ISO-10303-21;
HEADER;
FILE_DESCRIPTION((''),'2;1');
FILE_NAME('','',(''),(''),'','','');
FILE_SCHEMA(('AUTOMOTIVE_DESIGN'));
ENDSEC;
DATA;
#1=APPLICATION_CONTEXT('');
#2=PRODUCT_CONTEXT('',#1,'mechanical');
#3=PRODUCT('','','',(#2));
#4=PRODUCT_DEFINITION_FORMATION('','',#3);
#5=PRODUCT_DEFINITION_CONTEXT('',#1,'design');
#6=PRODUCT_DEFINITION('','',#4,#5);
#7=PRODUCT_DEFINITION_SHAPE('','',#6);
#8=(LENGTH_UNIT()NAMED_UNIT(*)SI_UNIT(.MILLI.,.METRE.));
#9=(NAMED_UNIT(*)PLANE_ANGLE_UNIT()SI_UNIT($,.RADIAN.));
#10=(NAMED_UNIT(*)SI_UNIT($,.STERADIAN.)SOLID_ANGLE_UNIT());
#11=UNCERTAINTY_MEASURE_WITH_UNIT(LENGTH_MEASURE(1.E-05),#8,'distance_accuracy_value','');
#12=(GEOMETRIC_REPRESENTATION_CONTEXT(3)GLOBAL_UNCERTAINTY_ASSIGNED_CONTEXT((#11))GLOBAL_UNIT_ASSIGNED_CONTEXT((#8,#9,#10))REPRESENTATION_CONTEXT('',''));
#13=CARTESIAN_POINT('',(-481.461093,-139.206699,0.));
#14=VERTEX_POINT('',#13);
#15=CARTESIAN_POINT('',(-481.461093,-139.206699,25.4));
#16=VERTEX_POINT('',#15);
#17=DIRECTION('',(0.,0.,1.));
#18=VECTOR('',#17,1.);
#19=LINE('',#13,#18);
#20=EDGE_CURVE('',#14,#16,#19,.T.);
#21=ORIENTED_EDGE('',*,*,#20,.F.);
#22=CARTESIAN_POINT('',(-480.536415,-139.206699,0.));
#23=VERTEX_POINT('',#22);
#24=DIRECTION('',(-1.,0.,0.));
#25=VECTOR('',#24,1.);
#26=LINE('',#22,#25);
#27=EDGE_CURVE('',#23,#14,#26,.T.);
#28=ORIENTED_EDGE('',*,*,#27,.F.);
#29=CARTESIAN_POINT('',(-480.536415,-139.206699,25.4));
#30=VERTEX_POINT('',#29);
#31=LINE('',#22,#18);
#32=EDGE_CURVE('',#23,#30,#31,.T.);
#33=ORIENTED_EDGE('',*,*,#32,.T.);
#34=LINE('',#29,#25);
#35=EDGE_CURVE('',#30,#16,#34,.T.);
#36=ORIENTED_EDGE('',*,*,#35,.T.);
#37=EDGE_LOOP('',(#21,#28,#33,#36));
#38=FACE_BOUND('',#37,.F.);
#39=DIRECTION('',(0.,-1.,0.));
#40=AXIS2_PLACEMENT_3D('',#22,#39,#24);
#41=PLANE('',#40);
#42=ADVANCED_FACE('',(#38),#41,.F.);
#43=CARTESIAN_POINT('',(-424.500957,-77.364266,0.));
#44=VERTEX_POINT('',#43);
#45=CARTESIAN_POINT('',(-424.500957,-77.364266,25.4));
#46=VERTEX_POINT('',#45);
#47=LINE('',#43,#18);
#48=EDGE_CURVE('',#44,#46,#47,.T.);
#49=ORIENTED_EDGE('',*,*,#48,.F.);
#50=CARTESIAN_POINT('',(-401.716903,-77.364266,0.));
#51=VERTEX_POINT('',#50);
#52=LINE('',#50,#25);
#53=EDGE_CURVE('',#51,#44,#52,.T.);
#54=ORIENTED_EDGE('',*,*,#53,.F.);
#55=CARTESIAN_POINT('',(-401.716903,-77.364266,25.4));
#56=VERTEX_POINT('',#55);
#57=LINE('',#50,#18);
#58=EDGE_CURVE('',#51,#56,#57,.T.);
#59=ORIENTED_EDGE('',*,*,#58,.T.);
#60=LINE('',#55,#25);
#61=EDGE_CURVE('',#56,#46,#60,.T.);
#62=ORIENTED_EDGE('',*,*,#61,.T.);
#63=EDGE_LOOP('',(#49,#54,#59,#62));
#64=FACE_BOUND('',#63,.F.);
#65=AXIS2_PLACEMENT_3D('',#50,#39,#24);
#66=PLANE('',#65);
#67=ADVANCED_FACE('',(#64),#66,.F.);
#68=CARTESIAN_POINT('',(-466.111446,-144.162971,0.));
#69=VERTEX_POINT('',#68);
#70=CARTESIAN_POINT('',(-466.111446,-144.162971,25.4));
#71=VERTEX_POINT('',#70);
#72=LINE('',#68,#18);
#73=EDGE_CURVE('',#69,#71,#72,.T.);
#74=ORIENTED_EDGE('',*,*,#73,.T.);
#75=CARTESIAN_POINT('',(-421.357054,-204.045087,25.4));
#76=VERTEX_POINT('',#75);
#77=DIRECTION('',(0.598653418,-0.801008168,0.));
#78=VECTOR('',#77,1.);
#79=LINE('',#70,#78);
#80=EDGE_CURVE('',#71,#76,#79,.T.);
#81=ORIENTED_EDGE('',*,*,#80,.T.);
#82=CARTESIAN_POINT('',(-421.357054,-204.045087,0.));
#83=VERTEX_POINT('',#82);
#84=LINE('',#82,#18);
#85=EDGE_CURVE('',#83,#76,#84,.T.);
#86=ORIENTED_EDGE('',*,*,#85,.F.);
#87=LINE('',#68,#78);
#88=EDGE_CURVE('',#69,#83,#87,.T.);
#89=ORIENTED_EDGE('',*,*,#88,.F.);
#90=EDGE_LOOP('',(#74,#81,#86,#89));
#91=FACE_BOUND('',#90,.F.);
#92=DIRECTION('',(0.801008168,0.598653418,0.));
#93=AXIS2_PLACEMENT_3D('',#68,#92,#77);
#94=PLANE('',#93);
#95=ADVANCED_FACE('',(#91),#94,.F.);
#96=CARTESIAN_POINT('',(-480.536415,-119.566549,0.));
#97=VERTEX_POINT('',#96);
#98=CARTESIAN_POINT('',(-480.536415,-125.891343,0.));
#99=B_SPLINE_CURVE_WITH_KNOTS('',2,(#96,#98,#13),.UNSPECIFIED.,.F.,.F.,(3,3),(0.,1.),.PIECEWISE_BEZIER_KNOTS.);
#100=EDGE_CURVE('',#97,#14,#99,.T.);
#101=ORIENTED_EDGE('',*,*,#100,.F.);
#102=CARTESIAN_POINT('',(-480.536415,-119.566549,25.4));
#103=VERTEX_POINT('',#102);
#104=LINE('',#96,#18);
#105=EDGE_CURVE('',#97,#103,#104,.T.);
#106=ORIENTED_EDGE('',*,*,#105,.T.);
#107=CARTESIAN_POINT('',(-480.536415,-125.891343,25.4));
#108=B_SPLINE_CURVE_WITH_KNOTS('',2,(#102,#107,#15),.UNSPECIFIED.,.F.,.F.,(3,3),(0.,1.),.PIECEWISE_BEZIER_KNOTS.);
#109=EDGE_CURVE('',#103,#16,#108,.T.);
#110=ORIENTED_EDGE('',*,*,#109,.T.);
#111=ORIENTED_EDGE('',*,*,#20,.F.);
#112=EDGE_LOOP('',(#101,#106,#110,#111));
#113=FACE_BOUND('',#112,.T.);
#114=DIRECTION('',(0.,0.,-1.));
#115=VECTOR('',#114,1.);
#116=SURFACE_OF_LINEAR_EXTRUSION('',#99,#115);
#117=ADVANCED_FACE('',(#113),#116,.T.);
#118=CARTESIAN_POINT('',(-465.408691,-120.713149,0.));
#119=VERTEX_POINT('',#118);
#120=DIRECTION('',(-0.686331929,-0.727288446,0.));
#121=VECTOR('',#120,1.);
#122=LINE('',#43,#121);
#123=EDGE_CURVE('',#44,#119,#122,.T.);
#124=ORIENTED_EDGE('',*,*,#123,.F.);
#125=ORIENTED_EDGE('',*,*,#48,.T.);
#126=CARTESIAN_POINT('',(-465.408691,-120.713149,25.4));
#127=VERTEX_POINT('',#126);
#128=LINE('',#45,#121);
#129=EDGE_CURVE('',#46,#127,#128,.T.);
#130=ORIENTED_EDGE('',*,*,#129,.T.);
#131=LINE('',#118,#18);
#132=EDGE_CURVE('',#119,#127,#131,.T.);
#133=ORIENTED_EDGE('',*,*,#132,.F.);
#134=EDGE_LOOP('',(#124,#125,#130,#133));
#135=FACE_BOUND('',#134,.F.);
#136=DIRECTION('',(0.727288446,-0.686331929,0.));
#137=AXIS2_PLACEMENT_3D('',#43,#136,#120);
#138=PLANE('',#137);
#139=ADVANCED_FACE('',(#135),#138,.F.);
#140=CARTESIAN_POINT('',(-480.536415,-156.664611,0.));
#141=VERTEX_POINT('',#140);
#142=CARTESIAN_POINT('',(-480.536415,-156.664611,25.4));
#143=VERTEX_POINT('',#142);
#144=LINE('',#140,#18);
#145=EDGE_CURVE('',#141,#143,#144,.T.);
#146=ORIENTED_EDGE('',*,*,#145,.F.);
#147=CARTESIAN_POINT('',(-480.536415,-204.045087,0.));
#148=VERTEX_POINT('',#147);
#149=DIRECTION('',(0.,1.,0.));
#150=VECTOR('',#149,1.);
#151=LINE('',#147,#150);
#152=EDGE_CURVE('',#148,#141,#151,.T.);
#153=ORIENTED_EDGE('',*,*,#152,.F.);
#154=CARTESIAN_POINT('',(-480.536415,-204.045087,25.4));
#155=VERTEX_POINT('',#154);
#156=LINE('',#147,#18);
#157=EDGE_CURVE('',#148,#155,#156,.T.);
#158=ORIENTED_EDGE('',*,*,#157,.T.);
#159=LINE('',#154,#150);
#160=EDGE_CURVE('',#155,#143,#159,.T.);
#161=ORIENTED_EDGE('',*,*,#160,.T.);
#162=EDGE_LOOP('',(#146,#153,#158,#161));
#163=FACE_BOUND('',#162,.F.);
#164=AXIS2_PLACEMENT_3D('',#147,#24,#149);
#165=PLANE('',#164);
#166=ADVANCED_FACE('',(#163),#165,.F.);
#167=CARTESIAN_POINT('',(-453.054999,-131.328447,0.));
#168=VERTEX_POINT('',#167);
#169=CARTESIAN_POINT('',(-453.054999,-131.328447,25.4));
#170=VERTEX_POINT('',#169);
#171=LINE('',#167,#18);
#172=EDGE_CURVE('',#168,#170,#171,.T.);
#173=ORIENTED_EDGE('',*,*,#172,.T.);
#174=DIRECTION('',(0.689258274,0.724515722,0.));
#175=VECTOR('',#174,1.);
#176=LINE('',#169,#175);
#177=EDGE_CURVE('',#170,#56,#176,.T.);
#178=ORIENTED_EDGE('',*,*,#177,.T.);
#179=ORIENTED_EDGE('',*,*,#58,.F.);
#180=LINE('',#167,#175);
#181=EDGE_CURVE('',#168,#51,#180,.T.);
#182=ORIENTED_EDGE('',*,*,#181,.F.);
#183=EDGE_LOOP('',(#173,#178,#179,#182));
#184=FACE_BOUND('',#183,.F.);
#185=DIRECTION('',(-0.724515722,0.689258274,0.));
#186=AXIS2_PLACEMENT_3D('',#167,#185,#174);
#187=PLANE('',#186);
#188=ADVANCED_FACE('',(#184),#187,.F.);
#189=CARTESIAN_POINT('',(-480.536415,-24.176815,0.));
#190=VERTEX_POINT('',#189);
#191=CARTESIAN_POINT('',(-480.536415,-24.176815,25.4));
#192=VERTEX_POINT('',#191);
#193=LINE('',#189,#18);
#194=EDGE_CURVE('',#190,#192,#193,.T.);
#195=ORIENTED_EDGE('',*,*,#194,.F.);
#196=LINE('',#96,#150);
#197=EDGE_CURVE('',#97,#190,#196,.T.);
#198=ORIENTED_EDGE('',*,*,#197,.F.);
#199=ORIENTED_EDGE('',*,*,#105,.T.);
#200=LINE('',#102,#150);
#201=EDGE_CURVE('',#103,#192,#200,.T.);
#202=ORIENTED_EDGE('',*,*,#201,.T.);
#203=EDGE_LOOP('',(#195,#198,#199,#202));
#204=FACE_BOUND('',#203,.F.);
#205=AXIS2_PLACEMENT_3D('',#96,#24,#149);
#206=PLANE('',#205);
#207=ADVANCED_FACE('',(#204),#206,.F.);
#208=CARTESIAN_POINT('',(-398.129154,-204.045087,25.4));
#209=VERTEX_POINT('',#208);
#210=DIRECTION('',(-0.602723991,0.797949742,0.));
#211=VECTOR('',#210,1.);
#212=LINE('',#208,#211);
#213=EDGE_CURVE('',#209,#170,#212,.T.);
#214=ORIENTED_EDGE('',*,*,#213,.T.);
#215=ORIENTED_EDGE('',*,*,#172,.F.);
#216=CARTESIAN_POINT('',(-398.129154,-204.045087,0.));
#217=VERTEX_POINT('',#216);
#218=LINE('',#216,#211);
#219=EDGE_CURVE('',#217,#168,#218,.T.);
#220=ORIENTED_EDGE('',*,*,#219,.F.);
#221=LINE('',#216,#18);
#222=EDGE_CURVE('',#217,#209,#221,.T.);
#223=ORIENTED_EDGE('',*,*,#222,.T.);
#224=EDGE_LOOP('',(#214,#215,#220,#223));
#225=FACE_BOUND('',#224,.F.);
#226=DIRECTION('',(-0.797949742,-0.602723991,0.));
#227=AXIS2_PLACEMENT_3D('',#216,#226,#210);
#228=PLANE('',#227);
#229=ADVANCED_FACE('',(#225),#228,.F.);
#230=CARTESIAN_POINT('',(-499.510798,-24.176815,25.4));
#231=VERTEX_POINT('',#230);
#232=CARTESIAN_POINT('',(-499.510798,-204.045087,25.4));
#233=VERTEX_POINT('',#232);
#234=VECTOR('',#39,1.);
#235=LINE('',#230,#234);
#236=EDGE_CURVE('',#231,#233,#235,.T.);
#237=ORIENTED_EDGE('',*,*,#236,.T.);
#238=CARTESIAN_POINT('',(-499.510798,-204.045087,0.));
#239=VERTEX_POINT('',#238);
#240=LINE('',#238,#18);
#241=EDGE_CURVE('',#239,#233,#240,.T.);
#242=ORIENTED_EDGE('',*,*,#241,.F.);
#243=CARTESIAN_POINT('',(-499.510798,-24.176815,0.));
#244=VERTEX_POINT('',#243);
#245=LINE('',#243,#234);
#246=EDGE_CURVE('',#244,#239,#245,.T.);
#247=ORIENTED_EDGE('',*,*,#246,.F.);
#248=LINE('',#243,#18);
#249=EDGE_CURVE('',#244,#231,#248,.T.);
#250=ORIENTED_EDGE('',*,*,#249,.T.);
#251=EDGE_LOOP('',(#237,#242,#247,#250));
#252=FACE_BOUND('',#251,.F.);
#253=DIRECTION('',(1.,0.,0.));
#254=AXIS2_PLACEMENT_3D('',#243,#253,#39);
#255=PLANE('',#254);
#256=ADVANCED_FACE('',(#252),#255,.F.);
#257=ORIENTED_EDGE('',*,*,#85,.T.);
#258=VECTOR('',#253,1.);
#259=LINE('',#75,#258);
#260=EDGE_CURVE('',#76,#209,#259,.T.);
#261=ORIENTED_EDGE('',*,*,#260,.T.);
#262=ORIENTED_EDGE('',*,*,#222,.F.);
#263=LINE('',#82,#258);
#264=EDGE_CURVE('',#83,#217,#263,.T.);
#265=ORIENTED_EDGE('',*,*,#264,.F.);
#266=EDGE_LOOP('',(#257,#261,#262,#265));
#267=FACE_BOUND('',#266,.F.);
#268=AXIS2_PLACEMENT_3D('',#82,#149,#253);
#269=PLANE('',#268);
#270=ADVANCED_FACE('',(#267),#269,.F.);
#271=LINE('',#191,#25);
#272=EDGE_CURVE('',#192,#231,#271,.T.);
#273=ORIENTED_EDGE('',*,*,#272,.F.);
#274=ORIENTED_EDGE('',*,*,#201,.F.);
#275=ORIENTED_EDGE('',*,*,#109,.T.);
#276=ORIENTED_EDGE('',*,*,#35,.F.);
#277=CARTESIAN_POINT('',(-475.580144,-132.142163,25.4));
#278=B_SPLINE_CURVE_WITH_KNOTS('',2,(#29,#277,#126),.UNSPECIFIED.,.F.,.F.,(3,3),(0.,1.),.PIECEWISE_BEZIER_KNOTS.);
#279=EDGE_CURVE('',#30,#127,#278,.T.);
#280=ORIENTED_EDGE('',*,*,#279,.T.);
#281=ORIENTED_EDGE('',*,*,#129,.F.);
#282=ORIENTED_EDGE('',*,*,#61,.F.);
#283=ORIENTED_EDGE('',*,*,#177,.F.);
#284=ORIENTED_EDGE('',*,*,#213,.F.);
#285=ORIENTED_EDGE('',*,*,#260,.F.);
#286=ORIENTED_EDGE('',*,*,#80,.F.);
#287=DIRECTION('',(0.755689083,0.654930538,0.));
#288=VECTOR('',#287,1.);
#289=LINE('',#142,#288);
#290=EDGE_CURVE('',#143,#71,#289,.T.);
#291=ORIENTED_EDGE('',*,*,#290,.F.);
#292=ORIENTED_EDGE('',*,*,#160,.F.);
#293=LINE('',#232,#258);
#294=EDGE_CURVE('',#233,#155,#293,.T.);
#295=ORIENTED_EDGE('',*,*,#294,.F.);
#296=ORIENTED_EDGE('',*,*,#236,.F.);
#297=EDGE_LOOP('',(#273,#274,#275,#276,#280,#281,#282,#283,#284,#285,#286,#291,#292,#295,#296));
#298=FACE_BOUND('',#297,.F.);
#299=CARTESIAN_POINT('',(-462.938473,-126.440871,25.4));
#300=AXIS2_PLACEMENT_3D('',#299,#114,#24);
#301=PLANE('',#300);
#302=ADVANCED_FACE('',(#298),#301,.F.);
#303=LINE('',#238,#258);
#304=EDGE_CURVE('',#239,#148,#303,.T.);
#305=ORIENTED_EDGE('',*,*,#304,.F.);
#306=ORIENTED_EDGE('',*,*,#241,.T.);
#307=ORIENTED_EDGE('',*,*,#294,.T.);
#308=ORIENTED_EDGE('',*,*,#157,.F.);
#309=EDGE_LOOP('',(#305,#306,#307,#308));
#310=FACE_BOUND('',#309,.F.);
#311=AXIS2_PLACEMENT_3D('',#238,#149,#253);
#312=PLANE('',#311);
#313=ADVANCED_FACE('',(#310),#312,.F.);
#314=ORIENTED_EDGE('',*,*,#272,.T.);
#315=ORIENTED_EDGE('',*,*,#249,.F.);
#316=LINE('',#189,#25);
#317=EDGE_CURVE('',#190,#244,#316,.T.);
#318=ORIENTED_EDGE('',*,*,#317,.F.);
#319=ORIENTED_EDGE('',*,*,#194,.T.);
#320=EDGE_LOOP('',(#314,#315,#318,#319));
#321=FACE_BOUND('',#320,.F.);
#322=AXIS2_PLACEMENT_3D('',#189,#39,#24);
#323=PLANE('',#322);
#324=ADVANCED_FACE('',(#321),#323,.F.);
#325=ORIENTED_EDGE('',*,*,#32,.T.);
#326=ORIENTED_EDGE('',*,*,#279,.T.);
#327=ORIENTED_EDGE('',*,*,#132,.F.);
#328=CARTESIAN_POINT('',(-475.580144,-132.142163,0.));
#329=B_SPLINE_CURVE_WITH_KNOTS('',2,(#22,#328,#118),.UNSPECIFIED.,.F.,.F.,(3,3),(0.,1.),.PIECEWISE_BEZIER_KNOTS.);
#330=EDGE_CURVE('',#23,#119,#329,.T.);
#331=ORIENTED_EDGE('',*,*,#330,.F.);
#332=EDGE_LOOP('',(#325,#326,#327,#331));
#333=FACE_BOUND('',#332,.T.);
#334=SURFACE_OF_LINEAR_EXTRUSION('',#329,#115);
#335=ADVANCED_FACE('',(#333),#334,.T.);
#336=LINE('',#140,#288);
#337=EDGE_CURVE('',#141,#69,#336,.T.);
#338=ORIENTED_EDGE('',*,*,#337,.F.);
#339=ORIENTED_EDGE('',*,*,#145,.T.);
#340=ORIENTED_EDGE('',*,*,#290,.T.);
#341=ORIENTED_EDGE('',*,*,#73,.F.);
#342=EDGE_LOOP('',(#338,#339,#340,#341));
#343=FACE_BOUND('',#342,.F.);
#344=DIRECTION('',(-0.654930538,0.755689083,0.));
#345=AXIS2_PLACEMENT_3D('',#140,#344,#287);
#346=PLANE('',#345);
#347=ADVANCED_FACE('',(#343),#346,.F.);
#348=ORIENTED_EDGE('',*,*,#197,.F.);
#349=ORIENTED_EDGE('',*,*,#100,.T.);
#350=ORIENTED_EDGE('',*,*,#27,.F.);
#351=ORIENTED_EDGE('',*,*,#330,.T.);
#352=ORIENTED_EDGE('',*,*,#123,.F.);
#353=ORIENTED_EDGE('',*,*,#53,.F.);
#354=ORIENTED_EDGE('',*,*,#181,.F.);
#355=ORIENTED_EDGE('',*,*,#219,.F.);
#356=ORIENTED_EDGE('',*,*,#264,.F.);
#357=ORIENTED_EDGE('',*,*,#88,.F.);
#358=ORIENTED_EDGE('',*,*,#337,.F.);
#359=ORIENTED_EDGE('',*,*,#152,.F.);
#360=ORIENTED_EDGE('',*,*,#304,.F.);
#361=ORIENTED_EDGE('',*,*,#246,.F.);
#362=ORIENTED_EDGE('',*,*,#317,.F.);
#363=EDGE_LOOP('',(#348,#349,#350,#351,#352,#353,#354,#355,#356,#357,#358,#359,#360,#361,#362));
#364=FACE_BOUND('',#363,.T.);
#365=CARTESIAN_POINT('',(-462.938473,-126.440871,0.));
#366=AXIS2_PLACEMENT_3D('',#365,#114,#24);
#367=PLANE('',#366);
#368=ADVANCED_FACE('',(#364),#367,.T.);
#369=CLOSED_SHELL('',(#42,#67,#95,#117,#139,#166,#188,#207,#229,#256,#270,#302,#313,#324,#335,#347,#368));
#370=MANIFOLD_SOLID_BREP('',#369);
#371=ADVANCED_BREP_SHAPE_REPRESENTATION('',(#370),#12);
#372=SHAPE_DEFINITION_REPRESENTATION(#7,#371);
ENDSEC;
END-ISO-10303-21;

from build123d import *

# Parameters (mm, degrees)
F1_DEPTH = 25.4


with BuildPart() as f1:
    # F0 (on Top) → F1 (new body)
    with BuildSketch(Plane.XY):
        with BuildLine():
            add(Edge.make_bspline(
                [(-480.5364153451, -139.2066991603), (-475.5801438199, -132.1421628818), (-465.4086910628, -120.7131486929)],
                knots=[0, 0, 0, 1, 1, 1], degree=2))
            Line((-480.5364153451, -139.2066991603), (-481.4610928685, -139.2066991603))
            add(Edge.make_bspline(
                [(-480.5364153451, -119.566548564), (-480.5364153451, -125.8913428238), (-481.4610928685, -139.2066991603)],
                knots=[0, 0, 0, 1, 1, 1], degree=2))
            Line((-480.5364153451, -119.566548564), (-480.5364153451, -24.1768152531))
            Line((-480.5364153451, -24.1768152531), (-499.5107981247, -24.1768152531))
            Line((-499.5107981247, -24.1768152531), (-499.5107981247, -204.0450870991))
            Line((-499.5107981247, -204.0450870991), (-480.5364153451, -204.0450870991))
            Line((-480.5364153451, -204.0450870991), (-480.5364153451, -156.6646108016))
            Line((-480.5364153451, -156.6646108016), (-466.1114459806, -144.1629706856))
            Line((-466.1114459806, -144.1629706856), (-421.3570538494, -204.0450870991))
            Line((-421.3570538494, -204.0450870991), (-398.1291544624, -204.0450870991))
            Line((-398.1291544624, -204.0450870991), (-453.0549993506, -131.3284466612))
            Line((-453.0549993506, -131.3284466612), (-401.716903253, -77.3642663973))
            Line((-401.716903253, -77.3642663973), (-424.5009574289, -77.3642663973))
            Line((-424.5009574289, -77.3642663973), (-465.4086910628, -120.7131486929))
        make_face()
    extrude(amount=F1_DEPTH)


solid = f1.part
